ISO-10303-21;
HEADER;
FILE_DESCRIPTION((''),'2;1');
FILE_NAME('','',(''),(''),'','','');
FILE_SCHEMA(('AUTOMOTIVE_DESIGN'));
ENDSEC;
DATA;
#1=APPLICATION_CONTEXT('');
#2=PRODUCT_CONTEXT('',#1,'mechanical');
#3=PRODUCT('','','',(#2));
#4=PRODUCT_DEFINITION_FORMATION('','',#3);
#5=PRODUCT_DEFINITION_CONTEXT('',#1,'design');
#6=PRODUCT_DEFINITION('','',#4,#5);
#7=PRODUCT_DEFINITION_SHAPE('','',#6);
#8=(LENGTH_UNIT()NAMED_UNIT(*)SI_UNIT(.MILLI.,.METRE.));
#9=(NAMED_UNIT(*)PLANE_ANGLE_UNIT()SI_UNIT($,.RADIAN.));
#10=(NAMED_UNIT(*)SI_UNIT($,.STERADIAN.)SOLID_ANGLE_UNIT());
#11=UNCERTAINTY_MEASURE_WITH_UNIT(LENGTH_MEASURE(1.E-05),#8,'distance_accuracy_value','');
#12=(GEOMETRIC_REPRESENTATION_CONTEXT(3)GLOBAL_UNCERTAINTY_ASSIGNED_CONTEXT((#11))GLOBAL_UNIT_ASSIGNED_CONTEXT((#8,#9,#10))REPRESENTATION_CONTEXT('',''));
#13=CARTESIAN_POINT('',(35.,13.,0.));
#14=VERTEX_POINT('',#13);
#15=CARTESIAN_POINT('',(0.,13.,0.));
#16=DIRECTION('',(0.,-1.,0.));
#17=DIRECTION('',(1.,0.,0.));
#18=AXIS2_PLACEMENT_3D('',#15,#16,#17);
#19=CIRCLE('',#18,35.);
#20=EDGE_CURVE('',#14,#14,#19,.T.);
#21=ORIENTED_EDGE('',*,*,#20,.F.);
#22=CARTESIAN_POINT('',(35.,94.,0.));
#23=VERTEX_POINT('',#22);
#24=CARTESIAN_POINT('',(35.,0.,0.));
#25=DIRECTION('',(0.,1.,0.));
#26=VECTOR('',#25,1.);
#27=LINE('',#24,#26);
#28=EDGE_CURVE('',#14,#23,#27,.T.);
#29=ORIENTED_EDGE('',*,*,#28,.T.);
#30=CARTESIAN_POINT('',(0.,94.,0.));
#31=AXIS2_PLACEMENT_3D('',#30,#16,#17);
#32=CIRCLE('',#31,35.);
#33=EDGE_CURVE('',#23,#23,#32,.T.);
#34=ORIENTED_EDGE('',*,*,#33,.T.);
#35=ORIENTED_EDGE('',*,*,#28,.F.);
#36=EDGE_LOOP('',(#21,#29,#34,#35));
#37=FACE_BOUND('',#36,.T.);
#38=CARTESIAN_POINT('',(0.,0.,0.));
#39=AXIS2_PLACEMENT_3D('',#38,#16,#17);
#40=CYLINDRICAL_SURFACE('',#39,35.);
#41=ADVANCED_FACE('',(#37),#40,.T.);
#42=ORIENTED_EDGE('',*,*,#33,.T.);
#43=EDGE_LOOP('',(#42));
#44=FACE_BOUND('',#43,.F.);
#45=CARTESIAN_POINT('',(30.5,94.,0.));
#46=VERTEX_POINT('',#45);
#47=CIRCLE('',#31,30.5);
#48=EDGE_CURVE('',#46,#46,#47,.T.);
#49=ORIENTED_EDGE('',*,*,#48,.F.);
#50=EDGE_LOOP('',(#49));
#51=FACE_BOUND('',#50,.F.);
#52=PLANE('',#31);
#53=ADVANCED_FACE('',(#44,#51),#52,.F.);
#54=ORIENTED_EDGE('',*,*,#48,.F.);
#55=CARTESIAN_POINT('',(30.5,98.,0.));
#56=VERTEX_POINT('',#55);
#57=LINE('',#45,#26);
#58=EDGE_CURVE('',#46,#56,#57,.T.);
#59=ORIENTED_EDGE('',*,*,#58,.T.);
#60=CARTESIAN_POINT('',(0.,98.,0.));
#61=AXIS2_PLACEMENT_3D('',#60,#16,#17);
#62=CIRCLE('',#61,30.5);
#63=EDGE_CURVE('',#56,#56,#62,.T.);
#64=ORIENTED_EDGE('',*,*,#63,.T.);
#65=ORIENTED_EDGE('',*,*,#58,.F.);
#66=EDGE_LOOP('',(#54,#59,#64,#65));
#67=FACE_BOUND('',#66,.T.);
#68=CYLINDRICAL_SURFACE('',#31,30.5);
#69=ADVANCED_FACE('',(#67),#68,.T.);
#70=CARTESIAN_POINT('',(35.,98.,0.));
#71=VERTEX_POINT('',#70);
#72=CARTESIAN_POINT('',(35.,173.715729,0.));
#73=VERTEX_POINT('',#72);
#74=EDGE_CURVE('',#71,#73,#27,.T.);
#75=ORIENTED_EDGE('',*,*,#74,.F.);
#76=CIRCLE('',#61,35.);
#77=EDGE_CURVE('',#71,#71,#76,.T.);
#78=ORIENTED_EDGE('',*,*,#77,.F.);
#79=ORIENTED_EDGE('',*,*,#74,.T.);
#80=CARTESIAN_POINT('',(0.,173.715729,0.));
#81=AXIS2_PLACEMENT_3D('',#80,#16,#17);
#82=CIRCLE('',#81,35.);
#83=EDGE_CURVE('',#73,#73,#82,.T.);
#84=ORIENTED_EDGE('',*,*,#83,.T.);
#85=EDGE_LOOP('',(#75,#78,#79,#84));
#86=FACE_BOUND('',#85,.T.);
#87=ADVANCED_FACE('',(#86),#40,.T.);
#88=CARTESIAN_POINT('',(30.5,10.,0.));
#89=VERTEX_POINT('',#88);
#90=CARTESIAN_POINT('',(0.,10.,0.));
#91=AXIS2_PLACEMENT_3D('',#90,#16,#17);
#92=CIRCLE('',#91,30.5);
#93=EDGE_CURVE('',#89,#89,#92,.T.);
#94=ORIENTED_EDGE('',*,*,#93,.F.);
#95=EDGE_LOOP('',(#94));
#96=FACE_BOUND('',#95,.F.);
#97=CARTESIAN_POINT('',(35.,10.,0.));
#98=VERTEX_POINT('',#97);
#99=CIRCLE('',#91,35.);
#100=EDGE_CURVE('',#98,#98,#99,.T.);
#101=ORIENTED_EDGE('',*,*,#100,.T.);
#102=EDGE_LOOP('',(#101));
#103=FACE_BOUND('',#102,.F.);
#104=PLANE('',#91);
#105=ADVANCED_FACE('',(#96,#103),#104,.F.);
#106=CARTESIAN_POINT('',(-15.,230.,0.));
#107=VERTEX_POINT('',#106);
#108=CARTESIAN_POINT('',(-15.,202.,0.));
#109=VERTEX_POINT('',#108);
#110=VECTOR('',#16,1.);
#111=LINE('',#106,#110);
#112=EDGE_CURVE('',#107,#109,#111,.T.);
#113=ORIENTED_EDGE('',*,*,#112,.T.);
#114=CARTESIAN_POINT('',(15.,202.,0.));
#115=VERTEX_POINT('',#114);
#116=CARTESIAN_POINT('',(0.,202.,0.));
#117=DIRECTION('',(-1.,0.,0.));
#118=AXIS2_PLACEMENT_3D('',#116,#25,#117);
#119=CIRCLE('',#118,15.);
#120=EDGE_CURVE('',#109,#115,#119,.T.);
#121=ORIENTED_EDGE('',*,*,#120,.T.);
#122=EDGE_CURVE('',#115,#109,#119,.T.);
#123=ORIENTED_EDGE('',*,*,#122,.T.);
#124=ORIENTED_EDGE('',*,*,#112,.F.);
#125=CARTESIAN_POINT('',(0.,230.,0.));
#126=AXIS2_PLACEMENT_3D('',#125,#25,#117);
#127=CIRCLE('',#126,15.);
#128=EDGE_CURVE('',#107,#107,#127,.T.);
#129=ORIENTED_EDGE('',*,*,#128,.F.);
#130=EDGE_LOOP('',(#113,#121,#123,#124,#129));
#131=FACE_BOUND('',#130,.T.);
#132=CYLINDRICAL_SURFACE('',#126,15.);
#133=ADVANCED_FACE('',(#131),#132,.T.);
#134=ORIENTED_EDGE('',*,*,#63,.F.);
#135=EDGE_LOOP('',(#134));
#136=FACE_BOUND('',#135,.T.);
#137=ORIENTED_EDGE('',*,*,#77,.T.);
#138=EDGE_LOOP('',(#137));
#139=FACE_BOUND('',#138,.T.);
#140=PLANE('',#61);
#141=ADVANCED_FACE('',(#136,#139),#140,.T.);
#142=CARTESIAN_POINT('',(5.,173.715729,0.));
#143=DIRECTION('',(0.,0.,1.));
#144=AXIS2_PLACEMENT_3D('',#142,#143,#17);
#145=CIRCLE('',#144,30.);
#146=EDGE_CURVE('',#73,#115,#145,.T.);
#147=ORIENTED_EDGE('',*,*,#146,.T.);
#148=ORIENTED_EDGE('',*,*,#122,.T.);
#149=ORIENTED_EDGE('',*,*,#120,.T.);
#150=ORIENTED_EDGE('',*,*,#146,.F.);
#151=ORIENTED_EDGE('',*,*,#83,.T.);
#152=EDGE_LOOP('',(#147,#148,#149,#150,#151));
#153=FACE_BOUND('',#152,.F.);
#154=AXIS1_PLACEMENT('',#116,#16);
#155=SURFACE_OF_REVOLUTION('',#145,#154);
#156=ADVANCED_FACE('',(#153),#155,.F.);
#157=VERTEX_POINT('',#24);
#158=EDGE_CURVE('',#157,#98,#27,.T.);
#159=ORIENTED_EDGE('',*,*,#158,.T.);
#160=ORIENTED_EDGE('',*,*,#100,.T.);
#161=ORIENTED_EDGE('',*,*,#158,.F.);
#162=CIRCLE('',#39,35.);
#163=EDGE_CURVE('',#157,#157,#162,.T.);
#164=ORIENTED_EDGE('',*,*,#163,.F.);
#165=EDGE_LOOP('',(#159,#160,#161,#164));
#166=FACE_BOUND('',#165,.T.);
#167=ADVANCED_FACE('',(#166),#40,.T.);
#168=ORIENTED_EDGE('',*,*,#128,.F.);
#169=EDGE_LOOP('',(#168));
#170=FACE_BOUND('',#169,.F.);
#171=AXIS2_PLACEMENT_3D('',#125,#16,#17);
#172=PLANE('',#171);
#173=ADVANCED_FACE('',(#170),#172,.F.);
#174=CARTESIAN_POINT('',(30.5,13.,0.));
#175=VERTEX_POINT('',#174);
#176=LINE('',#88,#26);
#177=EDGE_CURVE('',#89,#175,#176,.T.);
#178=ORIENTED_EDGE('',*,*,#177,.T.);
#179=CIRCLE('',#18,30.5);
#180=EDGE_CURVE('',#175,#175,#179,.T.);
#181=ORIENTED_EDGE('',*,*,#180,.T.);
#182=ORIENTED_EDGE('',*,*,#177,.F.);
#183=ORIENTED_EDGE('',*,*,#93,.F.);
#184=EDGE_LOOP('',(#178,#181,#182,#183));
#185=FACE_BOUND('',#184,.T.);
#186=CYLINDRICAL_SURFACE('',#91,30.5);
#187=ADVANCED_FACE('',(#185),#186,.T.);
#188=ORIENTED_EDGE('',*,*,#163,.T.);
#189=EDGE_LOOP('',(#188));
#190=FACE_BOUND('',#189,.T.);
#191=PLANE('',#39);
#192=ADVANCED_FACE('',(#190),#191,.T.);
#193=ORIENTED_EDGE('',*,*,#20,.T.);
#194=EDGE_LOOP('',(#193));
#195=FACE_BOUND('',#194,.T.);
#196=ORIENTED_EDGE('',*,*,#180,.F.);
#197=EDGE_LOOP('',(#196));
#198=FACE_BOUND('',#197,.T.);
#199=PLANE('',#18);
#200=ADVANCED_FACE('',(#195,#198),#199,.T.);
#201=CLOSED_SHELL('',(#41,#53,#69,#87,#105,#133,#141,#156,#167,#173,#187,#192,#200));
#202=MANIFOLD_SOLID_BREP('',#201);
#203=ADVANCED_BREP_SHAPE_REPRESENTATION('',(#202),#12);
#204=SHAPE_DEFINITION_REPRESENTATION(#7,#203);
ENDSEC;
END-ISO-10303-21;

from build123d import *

# Parameters (mm, degrees)
F0_R     = 35
F1_DEPTH = 230
F3_R     = 40.5
F3_R_2   = 30.5
F4_DEPTH = 3
F6_R     = 40
F6_R_2   = 30.5
F7_DEPTH = 4
F8_R     = 40
F8_R_2   = 15
F9_DEPTH = 28


# Not quite as in the source:
# - a fillet or chamfer that OpenCascade refuses, or shapes differently, is made with other operations: its cross-section is extruded or revolved along the edge and cut away or added


with BuildPart() as f1:
    # F0 (on Front) → F1 (new body)
    with BuildSketch(Plane.XZ):
        Circle(F0_R)
    extrude(amount=-F1_DEPTH)

    # F3 (on offset) → F4 (cut)
    with BuildSketch(Plane.XZ.offset(-10)):
        Circle(F3_R)
        Circle(F3_R_2, mode=Mode.SUBTRACT)
    extrude(amount=-F4_DEPTH, mode=Mode.SUBTRACT)

    # F6 (on offset) → F7 (cut)
    with BuildSketch(Plane.XZ.offset(-94)):
        Circle(F6_R)
        Circle(F6_R_2, mode=Mode.SUBTRACT)
    extrude(amount=-F7_DEPTH, mode=Mode.SUBTRACT)

    # F8 (on face) → F9 (cut)
    with BuildSketch(Plane(origin=(0, 230, 0), x_dir=(-1, 0, 0), z_dir=(0, 1, 0))):
        Circle(F8_R)
        Circle(F8_R_2, mode=Mode.SUBTRACT)
    extrude(amount=-F9_DEPTH, mode=Mode.SUBTRACT)

    # F10: fillet of radius 30 on 1 edges, made by hand

    # F10_s1 → F10_t2 (revolve, cut)
    with BuildSketch(Plane.XY):
        with BuildLine():
            ThreePointArc((35, 173.7157287525), (29.4948974278, 191.0362368282), (15, 202))
            Line((15, 202), (35, 202))
            Line((35, 202), (35, 173.7157287525))
        make_face()
    revolve(axis=Axis((0, 202, 0), (0, -1, 0)), mode=Mode.SUBTRACT)


solid = f1.part
